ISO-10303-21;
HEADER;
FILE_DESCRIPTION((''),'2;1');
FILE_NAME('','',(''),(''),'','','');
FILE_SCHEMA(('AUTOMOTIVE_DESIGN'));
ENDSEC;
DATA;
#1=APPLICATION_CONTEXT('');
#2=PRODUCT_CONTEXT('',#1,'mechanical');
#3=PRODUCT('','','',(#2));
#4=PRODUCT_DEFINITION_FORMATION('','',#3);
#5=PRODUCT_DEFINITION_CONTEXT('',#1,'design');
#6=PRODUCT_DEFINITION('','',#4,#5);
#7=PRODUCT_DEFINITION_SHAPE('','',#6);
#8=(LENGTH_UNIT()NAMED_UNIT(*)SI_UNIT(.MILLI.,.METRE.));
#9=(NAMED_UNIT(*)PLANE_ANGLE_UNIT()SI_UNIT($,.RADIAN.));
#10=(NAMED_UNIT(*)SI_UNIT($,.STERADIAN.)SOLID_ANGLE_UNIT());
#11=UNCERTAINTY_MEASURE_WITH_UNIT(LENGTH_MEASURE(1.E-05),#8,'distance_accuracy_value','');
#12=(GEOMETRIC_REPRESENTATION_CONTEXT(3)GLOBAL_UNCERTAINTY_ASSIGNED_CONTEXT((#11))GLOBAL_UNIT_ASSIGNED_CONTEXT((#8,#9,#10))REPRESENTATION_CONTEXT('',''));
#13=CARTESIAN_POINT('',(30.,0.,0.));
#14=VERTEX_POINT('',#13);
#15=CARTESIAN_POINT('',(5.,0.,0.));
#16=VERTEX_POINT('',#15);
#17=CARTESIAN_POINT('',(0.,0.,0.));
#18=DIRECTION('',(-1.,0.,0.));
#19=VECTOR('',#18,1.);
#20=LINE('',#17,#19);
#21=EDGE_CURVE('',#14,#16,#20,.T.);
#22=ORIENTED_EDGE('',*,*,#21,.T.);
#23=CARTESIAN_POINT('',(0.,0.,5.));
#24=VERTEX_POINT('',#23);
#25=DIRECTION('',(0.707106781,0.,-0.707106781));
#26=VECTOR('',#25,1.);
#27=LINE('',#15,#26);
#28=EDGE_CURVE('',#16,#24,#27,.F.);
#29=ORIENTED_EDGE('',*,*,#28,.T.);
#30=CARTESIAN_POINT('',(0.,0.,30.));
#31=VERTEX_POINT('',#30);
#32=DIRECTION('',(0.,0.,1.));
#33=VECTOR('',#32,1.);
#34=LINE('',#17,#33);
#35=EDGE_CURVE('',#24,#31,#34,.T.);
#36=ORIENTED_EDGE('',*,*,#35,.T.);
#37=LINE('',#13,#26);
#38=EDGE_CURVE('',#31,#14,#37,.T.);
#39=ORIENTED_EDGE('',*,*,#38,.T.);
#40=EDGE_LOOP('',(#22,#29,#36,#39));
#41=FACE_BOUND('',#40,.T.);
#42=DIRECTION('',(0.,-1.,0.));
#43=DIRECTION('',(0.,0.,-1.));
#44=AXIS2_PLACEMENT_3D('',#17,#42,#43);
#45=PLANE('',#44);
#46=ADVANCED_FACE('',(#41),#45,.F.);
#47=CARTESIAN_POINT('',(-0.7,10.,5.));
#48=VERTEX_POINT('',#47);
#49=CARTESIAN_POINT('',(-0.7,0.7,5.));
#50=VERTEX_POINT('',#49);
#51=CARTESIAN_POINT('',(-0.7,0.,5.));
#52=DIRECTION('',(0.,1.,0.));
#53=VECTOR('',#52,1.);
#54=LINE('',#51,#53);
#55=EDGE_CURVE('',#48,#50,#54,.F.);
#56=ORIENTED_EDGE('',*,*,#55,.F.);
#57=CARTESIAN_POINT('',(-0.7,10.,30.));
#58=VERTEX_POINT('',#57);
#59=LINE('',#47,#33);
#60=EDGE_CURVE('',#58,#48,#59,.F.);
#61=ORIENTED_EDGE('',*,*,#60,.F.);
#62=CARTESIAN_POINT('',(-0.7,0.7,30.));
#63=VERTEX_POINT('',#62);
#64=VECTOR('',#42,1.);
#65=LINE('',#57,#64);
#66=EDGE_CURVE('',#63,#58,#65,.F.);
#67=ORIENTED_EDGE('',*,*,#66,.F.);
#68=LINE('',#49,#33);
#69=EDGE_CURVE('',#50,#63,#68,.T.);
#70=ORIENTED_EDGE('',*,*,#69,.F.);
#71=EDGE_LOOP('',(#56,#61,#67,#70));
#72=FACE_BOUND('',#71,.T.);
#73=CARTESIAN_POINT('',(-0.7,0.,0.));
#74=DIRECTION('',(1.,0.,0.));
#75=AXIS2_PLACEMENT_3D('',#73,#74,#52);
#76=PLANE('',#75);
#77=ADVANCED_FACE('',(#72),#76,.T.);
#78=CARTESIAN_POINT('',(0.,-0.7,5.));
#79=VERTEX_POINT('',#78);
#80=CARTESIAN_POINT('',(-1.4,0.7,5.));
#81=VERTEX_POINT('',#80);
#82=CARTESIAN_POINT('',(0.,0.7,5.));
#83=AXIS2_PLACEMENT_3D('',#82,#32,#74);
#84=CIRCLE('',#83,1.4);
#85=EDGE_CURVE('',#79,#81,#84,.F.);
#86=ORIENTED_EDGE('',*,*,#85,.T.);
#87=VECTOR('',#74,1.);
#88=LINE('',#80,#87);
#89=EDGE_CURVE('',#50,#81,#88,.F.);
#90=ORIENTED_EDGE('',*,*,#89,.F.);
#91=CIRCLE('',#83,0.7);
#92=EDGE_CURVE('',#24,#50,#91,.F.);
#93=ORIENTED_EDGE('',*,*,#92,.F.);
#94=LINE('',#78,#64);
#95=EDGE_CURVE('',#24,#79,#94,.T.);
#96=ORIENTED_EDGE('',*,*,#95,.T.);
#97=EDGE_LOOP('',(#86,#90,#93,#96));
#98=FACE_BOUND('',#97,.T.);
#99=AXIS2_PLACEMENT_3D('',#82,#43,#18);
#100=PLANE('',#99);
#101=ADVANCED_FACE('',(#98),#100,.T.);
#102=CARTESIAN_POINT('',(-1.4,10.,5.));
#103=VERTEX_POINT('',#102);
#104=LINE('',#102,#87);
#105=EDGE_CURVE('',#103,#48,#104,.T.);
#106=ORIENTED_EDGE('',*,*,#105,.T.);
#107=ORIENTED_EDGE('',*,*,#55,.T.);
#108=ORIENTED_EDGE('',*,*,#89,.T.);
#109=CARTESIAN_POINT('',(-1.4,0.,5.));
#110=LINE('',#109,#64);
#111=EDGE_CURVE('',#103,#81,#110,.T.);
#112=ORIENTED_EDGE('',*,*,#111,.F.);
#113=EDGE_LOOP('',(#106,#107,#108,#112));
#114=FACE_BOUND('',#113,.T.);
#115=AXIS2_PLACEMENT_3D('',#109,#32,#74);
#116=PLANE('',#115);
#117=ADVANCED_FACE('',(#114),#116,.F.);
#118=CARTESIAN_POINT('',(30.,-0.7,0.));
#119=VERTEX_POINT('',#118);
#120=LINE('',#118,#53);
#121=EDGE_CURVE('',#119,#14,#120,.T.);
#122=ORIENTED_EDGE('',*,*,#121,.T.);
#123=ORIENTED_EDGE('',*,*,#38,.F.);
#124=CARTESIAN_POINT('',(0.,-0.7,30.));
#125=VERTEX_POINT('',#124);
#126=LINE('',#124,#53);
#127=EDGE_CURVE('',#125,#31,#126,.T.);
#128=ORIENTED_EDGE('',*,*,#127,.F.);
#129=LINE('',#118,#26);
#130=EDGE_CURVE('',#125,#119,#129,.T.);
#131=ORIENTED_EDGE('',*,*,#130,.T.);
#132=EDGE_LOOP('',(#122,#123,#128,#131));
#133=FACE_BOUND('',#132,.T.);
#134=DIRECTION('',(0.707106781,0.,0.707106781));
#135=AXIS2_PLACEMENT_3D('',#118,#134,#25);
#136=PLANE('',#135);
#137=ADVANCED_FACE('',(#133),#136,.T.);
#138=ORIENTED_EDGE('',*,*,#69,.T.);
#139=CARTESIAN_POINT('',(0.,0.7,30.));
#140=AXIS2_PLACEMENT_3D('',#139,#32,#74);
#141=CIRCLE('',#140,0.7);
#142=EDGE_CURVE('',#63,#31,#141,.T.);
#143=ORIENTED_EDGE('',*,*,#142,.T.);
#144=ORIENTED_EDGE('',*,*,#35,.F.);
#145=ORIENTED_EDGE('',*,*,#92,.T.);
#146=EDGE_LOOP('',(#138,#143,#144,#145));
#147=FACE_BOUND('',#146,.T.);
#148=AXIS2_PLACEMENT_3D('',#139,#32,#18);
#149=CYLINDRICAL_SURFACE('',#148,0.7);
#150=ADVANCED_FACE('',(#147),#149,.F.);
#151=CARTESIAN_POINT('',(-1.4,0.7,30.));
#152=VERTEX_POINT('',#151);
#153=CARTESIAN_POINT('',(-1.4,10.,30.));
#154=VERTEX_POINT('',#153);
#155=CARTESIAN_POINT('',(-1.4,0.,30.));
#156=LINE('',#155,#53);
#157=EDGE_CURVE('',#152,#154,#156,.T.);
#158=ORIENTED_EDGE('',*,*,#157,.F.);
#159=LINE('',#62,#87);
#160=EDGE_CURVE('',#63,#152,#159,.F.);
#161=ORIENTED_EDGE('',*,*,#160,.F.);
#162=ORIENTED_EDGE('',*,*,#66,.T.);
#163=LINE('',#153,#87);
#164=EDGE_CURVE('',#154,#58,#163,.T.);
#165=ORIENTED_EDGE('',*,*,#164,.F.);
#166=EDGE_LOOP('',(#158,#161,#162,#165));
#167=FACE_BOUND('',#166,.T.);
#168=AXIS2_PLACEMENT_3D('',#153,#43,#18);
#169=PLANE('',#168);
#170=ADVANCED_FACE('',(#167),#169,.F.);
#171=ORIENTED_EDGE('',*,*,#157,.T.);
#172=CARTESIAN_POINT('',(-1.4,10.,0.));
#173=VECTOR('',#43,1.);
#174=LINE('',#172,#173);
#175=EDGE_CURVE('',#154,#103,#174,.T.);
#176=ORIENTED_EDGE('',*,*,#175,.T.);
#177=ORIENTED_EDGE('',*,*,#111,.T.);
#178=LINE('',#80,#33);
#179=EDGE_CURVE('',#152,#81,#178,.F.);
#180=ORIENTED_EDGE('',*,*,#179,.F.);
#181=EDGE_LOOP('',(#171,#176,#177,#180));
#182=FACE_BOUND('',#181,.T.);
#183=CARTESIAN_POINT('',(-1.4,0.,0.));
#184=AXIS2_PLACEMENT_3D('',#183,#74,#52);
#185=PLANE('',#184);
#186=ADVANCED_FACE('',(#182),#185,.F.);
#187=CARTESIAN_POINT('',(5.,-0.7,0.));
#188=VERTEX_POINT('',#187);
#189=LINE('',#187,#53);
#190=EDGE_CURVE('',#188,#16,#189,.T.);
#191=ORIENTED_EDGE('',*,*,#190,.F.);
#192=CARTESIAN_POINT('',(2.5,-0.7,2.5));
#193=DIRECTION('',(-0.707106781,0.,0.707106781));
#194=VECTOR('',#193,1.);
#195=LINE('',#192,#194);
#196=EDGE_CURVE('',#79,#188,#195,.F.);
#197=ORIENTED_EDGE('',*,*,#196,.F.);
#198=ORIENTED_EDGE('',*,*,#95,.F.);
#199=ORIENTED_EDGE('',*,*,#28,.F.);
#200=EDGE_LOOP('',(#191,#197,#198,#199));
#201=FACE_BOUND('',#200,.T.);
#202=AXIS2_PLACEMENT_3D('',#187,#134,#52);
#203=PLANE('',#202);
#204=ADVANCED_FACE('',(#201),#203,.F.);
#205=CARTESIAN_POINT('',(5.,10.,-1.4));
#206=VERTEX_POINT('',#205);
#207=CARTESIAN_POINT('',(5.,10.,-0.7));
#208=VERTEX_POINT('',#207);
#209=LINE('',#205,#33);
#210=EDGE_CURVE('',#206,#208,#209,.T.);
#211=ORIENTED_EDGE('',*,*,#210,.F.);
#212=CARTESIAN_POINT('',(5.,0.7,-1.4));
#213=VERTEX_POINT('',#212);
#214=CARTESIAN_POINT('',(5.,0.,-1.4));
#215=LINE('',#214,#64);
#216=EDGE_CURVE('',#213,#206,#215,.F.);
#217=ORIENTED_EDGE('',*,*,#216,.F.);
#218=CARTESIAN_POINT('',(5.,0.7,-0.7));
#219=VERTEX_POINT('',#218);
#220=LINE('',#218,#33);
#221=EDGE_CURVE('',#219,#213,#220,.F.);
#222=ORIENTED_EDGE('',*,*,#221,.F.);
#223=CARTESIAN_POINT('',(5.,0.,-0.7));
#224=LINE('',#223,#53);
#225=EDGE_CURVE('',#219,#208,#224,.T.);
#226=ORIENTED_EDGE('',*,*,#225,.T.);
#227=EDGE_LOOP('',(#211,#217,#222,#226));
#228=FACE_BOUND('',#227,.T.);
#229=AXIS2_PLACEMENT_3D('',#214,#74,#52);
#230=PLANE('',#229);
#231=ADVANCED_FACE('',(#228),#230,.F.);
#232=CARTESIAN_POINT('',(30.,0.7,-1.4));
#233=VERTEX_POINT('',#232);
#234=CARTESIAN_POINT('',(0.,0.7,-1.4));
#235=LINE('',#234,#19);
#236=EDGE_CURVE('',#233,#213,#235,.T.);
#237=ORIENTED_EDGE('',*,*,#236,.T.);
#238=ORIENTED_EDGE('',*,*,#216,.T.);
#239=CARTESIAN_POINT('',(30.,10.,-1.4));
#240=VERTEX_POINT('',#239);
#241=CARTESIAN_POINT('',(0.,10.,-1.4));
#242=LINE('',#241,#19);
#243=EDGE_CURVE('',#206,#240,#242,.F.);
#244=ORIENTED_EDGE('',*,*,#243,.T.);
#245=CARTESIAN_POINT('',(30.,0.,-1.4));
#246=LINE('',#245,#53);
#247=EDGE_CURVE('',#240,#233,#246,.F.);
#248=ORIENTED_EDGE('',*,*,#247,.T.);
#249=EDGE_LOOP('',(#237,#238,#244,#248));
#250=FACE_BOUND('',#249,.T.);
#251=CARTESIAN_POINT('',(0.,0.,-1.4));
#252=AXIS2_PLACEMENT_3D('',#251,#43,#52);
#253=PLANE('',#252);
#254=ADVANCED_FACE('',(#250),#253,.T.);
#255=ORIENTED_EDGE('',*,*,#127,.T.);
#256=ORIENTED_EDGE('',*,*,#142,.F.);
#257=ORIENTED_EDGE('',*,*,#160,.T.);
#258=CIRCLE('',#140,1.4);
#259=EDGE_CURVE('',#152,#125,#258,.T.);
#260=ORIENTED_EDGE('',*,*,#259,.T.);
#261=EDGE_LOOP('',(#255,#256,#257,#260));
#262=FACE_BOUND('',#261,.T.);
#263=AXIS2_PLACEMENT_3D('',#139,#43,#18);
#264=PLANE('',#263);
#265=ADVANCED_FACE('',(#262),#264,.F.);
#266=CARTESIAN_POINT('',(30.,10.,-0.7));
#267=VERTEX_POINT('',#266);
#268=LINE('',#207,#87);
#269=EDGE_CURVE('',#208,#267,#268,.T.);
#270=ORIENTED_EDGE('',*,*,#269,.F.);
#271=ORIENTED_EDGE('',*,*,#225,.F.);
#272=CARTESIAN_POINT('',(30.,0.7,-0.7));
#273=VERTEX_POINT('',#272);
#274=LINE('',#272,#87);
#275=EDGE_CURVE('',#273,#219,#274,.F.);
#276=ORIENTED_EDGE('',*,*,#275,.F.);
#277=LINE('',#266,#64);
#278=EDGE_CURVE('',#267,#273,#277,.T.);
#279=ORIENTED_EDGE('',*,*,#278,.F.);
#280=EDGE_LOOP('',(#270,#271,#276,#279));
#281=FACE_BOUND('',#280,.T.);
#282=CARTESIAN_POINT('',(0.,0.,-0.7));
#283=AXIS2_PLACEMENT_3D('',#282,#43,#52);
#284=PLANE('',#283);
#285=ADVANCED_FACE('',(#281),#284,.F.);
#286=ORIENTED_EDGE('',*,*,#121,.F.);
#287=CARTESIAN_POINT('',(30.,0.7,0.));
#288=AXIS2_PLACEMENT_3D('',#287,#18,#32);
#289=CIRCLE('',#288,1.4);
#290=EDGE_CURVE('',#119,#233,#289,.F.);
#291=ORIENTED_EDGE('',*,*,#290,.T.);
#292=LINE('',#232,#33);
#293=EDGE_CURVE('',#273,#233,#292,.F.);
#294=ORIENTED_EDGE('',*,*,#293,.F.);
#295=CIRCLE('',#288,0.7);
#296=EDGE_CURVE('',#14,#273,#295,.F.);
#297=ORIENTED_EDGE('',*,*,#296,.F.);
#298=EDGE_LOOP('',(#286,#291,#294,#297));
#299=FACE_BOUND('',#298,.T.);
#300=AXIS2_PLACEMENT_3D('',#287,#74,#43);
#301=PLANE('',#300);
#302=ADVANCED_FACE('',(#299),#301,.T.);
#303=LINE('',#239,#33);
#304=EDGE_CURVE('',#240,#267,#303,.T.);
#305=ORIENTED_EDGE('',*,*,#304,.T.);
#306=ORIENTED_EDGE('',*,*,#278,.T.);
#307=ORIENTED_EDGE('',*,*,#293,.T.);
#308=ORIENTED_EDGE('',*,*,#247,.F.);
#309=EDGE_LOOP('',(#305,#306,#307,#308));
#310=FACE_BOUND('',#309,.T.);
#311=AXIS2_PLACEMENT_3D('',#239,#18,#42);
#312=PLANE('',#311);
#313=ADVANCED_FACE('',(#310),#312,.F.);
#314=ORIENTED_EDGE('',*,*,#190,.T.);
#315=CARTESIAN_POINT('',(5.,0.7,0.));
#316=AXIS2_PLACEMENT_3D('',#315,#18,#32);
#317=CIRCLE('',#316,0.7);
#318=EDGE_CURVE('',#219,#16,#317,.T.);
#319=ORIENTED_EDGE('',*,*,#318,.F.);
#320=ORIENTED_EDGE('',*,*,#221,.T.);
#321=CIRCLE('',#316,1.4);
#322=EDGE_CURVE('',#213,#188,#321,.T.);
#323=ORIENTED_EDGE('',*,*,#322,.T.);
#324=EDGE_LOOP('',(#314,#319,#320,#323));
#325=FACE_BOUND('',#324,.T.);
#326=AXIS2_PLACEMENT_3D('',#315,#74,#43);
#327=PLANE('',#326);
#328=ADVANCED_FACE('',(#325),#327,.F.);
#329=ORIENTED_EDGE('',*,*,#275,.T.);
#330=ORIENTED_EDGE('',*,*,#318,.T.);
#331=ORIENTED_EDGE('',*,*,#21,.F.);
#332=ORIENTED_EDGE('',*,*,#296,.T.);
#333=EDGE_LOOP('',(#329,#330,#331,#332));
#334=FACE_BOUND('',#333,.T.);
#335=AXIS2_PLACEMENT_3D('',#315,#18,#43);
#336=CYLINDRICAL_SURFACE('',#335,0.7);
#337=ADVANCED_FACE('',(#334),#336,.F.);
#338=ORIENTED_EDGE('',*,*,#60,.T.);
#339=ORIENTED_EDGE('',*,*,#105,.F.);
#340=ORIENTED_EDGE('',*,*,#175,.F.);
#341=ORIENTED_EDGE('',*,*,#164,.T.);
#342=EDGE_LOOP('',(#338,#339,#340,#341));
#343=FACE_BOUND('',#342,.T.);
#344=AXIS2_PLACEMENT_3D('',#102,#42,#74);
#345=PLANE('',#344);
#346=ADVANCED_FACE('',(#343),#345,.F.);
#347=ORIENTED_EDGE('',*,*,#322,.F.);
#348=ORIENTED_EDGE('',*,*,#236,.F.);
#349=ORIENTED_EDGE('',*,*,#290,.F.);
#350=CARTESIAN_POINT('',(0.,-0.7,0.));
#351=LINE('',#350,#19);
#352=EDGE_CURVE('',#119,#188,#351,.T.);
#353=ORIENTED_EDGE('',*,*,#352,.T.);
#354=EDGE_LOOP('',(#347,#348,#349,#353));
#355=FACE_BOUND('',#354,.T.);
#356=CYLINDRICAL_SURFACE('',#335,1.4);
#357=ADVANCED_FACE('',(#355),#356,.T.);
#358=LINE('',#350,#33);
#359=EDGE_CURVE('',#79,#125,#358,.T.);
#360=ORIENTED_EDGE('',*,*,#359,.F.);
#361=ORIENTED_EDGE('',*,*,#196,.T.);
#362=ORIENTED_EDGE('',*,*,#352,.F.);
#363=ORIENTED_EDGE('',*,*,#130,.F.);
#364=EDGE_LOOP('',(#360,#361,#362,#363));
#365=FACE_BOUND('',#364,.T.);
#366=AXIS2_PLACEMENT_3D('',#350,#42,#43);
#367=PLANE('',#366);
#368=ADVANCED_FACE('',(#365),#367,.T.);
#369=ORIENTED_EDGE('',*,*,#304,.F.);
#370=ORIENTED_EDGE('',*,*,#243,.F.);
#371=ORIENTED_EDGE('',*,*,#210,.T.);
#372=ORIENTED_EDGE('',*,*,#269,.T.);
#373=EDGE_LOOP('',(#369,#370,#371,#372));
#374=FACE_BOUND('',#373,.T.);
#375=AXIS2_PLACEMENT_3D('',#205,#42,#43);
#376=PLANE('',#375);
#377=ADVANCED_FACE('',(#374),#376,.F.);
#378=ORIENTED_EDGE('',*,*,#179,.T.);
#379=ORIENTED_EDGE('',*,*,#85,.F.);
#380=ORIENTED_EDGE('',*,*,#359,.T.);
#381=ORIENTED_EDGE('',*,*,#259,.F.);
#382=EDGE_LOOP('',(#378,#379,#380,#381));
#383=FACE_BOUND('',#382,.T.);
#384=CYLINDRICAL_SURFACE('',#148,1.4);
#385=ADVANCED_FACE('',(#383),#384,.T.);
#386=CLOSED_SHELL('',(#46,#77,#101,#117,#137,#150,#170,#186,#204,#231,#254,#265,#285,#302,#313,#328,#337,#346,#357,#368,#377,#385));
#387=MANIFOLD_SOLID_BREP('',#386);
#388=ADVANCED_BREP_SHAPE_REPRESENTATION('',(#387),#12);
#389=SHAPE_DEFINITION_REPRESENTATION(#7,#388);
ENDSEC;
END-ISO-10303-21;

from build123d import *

# Parameters (mm, degrees)
BASE_FLANGE1_DEPTH      = 0.7
BREAK_CORNER1_OUTLINE_W = 10
BREAK_CORNER1_OUTLINE_H = 3
BREAK_CORNER1_DEPTH     = 3.535533906
EDGE_FLANGE2_DEPTH      = 25
EDGE_FLANGE2_BEND_DEPTH = 25


# Read off the part's stored shape, not the designer's step: Break-Corner1
# Sheet-metal steps are written as plain solids
with BuildPart() as part:
    # Sketch2 → Base-Flange1 (new body)
    with BuildSketch(Plane(origin=(0, 0, 0), x_dir=(1, 0, 0), z_dir=(0, 1, 0))):
        Polygon((0, 0), (0, -30), (30, 0), align=None)
    extrude(amount=-BASE_FLANGE1_DEPTH)

    # Break-Corner1 outline → Break-Corner1 (cut)
    with BuildSketch(Plane(origin=(0, 0, 0), x_dir=(0.7071067811865471, 0, -0.707106781186548), z_dir=(0.707106781186548, 0, 0.707106781186547))):
        with Locations((0, -0.5)):
            Rectangle(BREAK_CORNER1_OUTLINE_W, BREAK_CORNER1_OUTLINE_H)
    extrude(amount=BREAK_CORNER1_DEPTH, mode=Mode.SUBTRACT)

    # Edge-Flange2 section (across the edge) → Edge-Flange2 (add)
    with BuildSketch(Plane(origin=(-0.7, 0, 5), x_dir=(1, 0, 0), z_dir=(0, 0, 1))):
        with BuildLine():
            Line((-0.7, 0.7), (-0.7, 10))
            Line((-0.7, 10), (0, 10))
            Line((0, 10), (0, 0.7))
            ThreePointArc((0, 0.7), (0.205025253, 0.205025253), (0.7, 0))
            Line((0.7, 0), (0.7, -0.7))
            ThreePointArc((0.7, -0.7), (-0.289949494, -0.289949494), (-0.7, 0.7))
        make_face()
    extrude(amount=EDGE_FLANGE2_DEPTH)

    # Edge-Flange2 section 2 (across the edge) → Edge-Flange2 bend (add)
    with BuildSketch(Plane(origin=(30, 0, -0.7), x_dir=(0, 0, 1), z_dir=(-1, 0, 0))):
        with BuildLine():
            Line((-0.7, 0.7), (-0.7, 10))
            Line((-0.7, 10), (0, 10))
            Line((0, 10), (0, 0.7))
            ThreePointArc((0, 0.7), (0.205025253, 0.205025253), (0.7, 0))
            Line((0.7, 0), (0.7, -0.7))
            ThreePointArc((0.7, -0.7), (-0.289949494, -0.289949494), (-0.7, 0.7))
        make_face()
    extrude(amount=EDGE_FLANGE2_BEND_DEPTH)


solid = part.part
